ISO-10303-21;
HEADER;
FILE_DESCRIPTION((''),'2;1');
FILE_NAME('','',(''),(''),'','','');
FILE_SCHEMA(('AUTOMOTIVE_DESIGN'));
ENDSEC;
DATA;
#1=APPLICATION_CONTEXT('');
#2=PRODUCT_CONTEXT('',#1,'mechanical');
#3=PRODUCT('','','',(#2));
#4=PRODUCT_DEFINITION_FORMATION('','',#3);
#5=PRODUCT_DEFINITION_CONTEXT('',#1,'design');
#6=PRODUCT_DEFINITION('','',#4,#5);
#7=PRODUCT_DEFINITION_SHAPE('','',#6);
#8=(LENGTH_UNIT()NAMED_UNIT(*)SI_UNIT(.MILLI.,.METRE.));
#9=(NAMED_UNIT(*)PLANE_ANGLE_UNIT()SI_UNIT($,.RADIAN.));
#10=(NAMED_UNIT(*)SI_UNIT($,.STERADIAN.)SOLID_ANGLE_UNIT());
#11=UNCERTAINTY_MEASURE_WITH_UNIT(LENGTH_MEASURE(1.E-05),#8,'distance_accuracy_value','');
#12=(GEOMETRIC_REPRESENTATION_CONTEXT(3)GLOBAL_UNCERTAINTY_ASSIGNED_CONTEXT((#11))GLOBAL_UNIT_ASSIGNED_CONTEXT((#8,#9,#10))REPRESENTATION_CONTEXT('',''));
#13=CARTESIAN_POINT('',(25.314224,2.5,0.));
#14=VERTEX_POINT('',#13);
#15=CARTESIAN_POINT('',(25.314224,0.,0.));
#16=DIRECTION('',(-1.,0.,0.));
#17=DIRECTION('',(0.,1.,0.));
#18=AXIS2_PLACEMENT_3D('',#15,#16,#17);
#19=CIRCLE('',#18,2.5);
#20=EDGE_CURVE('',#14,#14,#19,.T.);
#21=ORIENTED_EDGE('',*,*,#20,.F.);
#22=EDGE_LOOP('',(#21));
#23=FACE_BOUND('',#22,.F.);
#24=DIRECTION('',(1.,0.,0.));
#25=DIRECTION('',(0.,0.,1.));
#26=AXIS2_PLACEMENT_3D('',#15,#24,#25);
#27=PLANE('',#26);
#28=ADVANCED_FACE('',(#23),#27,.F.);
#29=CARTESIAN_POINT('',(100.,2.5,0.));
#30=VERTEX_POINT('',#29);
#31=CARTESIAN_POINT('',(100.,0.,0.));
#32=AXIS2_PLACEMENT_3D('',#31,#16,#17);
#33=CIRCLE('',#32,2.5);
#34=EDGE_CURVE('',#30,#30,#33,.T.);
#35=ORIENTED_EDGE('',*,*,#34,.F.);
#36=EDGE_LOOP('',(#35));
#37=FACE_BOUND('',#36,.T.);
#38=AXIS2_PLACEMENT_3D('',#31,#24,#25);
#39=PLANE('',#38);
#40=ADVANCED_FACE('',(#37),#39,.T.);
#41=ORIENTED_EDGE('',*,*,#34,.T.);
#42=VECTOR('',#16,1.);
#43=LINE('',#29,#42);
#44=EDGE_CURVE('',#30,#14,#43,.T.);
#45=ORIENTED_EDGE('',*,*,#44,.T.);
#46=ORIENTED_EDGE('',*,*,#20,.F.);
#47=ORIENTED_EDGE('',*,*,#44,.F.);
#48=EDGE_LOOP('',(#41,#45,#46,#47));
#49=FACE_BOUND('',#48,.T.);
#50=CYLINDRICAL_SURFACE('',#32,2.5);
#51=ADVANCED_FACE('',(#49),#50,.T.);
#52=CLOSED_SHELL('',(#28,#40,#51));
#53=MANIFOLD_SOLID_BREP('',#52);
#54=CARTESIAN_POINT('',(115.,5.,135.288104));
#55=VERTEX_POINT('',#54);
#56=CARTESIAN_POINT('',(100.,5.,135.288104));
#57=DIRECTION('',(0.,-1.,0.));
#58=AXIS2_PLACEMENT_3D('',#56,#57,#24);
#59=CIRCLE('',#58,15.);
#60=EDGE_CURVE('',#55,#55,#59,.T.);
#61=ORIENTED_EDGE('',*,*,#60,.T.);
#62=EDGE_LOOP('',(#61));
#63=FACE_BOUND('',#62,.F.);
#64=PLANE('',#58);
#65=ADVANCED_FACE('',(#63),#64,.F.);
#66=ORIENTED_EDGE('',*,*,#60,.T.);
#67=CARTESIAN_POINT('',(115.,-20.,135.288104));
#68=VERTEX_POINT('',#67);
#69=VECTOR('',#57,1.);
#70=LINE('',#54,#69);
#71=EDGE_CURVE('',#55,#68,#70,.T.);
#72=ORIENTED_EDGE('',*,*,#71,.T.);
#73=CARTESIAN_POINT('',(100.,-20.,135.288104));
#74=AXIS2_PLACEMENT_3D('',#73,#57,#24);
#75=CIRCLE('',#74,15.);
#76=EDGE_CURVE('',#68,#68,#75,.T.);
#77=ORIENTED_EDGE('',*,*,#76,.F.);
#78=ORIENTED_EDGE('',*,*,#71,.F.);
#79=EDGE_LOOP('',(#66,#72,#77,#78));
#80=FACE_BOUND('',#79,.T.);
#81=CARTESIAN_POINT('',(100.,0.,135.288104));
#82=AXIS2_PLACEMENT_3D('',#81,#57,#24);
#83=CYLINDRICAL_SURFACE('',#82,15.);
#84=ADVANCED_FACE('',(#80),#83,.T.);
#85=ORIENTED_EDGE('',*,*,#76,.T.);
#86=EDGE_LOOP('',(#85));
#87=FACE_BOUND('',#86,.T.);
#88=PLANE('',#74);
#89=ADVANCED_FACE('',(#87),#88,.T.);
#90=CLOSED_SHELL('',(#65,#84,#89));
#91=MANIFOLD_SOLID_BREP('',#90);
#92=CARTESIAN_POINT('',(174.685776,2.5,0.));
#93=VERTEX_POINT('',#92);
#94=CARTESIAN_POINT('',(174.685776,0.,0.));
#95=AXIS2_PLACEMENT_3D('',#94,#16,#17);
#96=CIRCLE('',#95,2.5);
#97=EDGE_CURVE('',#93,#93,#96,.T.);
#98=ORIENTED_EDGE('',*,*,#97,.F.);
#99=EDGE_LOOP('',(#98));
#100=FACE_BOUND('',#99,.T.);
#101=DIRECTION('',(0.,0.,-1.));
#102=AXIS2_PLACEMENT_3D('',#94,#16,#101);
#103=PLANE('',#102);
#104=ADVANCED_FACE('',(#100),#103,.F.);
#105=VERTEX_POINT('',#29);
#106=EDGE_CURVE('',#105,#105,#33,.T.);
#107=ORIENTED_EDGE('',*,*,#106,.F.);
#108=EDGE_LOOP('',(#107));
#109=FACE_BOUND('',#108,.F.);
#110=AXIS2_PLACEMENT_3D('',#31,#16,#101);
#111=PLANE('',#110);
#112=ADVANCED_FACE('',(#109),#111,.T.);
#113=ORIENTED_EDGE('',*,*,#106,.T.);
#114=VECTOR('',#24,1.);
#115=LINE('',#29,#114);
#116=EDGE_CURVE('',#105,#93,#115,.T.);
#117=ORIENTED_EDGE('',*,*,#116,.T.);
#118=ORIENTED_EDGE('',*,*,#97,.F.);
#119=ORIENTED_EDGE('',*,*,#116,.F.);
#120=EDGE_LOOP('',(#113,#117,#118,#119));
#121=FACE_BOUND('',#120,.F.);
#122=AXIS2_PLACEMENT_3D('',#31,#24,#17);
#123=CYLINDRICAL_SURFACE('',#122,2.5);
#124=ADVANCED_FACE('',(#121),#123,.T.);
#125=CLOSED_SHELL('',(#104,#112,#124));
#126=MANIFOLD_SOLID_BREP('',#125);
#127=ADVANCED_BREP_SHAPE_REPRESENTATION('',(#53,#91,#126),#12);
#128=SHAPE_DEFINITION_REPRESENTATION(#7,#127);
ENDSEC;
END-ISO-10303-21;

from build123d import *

# Parameters (mm, degrees)
F2_R      = 2.5
F7_R      = 15
F8_DEPTH  = 20
F9_R      = 15
F10_DEPTH = 5


# Not quite as in the source:
# - a pattern or mirror of a feature is missing from the dataset's text; its kind, count and spacing are read off the source's solid


with BuildPart() as f4:
    # F4: sweep along a path in F3
    with BuildLine(Plane.XZ) as f4_path:
        Line((100, 0), (25.3142239141, 0))
    # F2 (on plane+point) → F4 (sweep)
    with BuildSketch(Plane.YZ.offset(100)):
        Circle(F2_R)
    sweep(path=f4_path.line)


with BuildPart() as f4_copies_1:
    # F4_copies: instance of F4
    add(f4.part.mirror(Plane(origin=(100, 0, 0), x_dir=(0, 0, 1), z_dir=(1, 0, 0))))


with BuildPart() as f8:
    # F7 (on Front) → F8 (new body)
    with BuildSketch(Plane.XZ):
        with Locations((100, 135.2881040452)):
            Circle(F7_R)
    extrude(amount=F8_DEPTH)

    # F9 (on face) → F10 (join)
    with BuildSketch(Plane.XZ):
        with Locations((100, 135.2881040452)):
            Circle(F9_R)
    extrude(amount=-F10_DEPTH)


solid = Compound([f4.part, f4_copies_1.part, f8.part])
